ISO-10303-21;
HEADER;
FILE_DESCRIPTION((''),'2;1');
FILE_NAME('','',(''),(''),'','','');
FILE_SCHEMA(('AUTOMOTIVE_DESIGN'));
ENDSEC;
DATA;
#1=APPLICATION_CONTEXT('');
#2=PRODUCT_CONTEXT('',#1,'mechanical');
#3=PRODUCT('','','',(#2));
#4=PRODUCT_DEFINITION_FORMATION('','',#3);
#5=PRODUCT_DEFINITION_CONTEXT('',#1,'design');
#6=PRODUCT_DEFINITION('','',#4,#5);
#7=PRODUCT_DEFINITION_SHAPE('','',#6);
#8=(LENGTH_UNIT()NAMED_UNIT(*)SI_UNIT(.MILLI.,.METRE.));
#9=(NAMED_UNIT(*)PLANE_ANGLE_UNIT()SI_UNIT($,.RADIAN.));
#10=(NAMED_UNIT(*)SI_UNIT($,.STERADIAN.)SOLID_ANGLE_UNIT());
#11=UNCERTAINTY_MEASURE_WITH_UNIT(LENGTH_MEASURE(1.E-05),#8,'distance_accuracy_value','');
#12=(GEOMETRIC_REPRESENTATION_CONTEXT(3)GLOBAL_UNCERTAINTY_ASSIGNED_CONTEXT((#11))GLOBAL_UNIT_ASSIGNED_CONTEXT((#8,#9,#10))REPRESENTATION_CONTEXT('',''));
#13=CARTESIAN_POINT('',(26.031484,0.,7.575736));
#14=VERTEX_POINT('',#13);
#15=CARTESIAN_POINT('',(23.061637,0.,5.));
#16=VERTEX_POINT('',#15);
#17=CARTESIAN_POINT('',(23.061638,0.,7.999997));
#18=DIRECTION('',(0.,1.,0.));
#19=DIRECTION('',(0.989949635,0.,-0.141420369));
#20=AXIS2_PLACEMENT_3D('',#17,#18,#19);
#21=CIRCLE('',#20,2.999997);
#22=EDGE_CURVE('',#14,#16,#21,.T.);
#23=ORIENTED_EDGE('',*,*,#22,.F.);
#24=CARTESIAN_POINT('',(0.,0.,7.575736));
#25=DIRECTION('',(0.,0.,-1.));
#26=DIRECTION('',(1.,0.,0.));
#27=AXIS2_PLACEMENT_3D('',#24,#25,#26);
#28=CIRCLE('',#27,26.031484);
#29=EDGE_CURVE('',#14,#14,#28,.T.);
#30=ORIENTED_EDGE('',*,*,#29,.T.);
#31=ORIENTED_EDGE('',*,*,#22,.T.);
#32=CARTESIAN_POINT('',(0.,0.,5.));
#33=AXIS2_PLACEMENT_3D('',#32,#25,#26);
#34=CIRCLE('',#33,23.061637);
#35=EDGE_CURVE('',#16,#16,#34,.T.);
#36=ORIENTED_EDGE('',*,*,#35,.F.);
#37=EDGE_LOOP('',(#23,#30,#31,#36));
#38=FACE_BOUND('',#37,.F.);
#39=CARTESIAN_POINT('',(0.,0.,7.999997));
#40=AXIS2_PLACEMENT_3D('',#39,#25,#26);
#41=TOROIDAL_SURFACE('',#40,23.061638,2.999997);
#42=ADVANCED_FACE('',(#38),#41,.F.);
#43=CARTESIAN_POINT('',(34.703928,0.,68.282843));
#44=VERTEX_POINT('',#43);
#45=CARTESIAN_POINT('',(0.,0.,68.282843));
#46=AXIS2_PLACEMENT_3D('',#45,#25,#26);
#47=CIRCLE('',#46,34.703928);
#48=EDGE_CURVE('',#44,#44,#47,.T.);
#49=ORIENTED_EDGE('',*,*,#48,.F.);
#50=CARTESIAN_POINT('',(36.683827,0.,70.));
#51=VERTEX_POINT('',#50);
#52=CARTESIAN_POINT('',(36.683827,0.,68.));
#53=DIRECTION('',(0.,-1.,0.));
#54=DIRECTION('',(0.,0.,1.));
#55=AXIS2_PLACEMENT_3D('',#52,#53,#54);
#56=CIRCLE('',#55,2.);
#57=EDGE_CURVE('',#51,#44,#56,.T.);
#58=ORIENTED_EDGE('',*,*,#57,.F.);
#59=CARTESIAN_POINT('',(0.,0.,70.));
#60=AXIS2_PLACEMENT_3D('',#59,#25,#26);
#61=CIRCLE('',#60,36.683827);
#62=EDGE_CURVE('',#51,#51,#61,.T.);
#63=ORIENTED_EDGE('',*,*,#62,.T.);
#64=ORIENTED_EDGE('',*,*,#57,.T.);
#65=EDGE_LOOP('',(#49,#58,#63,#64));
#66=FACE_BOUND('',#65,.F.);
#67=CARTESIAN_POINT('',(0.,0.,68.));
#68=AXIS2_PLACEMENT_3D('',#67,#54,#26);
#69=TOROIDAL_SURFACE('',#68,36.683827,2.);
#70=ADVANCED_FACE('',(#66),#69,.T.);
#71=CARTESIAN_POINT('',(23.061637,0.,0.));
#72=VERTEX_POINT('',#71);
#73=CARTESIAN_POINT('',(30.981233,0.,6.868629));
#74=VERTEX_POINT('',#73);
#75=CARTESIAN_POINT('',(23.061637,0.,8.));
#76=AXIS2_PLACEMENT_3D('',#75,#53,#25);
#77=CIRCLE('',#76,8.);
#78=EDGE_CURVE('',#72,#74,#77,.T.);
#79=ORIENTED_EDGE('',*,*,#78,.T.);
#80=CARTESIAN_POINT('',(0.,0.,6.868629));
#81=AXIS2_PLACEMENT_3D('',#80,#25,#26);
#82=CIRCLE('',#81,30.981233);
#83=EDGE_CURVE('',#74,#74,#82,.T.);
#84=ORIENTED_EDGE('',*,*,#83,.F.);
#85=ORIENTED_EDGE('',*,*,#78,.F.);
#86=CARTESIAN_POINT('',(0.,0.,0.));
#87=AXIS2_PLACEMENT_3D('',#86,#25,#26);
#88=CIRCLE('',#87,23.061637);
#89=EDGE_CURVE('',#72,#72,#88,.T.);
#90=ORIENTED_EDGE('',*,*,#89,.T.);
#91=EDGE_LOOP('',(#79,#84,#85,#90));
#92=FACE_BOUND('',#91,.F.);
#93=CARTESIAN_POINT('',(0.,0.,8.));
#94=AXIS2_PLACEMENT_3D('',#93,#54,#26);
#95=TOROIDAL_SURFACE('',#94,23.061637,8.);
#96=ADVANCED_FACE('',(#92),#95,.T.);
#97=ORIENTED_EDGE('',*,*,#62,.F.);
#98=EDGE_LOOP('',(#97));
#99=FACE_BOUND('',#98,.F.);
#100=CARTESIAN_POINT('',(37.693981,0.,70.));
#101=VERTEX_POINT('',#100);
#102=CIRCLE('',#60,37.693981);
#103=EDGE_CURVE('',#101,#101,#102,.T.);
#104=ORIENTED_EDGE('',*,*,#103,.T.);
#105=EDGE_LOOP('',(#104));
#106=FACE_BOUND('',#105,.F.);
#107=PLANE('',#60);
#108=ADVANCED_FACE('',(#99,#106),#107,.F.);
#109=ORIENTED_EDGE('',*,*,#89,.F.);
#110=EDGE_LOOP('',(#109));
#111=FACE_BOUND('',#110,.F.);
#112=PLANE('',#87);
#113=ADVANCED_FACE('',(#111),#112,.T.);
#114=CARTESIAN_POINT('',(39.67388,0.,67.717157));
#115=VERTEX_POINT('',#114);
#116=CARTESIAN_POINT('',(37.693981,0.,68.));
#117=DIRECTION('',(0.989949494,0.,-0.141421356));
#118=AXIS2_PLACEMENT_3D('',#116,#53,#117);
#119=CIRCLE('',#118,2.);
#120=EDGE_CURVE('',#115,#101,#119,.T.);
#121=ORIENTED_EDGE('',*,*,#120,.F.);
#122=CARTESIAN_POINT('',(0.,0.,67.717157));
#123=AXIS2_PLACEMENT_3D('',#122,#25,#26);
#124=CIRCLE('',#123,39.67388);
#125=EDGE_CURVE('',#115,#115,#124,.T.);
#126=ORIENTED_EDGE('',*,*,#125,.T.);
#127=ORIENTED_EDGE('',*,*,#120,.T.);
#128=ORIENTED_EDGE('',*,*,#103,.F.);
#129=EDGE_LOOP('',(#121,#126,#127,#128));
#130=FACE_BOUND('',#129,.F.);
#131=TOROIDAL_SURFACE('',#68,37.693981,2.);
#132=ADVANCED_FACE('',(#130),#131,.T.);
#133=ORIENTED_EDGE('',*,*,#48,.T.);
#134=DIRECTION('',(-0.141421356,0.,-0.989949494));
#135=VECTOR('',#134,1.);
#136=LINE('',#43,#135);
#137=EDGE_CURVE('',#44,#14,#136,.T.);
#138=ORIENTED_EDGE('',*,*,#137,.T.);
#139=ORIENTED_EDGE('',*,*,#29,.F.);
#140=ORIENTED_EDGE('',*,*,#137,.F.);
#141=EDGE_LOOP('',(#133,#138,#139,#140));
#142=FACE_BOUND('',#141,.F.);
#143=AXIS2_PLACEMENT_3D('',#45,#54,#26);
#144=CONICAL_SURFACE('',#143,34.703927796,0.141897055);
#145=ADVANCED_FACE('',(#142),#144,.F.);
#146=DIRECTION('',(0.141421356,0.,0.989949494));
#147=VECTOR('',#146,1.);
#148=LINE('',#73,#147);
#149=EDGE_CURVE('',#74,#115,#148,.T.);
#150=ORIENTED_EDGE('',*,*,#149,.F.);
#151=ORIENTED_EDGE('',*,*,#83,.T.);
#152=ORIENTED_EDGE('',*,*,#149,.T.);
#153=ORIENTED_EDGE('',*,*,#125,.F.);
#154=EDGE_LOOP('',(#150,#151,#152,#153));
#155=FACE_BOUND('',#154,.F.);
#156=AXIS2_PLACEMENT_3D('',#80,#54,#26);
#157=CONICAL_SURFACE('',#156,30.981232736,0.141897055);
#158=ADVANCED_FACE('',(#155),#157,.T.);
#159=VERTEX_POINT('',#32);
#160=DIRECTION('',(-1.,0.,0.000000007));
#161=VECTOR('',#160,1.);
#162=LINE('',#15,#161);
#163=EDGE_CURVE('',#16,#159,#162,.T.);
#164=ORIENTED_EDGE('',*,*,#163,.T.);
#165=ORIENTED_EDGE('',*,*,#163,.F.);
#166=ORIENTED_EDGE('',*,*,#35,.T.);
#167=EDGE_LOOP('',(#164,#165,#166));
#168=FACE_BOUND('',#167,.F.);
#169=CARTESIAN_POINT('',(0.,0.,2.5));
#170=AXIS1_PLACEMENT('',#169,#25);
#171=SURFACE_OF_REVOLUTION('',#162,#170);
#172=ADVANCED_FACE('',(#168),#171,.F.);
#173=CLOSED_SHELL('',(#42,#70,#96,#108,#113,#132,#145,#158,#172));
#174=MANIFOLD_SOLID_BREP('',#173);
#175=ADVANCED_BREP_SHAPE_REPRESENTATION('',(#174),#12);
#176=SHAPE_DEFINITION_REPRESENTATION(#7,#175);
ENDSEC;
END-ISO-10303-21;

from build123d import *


# Not quite as in the source:
# - ends of sketch curves that miss each other by under 0.0002 mm in the source are joined


with BuildPart() as f1:
    # F0 (on Front) → F1 (revolve)
    with BuildSketch(Plane.XZ):
        with BuildLine():
            Line((0, 4.9999998882), (0, 0))
            Line((0, 0), (23.0616367864, 0))
            ThreePointArc((23.0616367864, 0), (28.3032507173, 1.95636836), (30.9812327357, 6.8686291501))
            Line((30.9812327357, 6.8686291501), (39.6738796125, 67.7171572875))
            ThreePointArc((39.6738796125, 67.7171572875), (39.2048885352, 69.3104034827), (37.6939806252, 70))
            Line((37.6939806252, 70), (36.6838267834, 70))
            ThreePointArc((36.6838267834, 70), (35.3734233007, 69.51090791), (34.7039277961, 68.2828427125))
            Line((34.7039277961, 68.2828427125), (26.0314839961, 7.5757361129))
            ThreePointArc((26.0314839961, 7.5757361129), (25.0272421924, 5.7336379253), (23.0616367864, 4.9999997224))
            Line((23.0616367864, 4.9999997224), (0, 4.9999998882))
        make_face()
    revolve(axis=Axis((0, 0, 2.4999999441), (0, 0, -1)))


solid = f1.part
